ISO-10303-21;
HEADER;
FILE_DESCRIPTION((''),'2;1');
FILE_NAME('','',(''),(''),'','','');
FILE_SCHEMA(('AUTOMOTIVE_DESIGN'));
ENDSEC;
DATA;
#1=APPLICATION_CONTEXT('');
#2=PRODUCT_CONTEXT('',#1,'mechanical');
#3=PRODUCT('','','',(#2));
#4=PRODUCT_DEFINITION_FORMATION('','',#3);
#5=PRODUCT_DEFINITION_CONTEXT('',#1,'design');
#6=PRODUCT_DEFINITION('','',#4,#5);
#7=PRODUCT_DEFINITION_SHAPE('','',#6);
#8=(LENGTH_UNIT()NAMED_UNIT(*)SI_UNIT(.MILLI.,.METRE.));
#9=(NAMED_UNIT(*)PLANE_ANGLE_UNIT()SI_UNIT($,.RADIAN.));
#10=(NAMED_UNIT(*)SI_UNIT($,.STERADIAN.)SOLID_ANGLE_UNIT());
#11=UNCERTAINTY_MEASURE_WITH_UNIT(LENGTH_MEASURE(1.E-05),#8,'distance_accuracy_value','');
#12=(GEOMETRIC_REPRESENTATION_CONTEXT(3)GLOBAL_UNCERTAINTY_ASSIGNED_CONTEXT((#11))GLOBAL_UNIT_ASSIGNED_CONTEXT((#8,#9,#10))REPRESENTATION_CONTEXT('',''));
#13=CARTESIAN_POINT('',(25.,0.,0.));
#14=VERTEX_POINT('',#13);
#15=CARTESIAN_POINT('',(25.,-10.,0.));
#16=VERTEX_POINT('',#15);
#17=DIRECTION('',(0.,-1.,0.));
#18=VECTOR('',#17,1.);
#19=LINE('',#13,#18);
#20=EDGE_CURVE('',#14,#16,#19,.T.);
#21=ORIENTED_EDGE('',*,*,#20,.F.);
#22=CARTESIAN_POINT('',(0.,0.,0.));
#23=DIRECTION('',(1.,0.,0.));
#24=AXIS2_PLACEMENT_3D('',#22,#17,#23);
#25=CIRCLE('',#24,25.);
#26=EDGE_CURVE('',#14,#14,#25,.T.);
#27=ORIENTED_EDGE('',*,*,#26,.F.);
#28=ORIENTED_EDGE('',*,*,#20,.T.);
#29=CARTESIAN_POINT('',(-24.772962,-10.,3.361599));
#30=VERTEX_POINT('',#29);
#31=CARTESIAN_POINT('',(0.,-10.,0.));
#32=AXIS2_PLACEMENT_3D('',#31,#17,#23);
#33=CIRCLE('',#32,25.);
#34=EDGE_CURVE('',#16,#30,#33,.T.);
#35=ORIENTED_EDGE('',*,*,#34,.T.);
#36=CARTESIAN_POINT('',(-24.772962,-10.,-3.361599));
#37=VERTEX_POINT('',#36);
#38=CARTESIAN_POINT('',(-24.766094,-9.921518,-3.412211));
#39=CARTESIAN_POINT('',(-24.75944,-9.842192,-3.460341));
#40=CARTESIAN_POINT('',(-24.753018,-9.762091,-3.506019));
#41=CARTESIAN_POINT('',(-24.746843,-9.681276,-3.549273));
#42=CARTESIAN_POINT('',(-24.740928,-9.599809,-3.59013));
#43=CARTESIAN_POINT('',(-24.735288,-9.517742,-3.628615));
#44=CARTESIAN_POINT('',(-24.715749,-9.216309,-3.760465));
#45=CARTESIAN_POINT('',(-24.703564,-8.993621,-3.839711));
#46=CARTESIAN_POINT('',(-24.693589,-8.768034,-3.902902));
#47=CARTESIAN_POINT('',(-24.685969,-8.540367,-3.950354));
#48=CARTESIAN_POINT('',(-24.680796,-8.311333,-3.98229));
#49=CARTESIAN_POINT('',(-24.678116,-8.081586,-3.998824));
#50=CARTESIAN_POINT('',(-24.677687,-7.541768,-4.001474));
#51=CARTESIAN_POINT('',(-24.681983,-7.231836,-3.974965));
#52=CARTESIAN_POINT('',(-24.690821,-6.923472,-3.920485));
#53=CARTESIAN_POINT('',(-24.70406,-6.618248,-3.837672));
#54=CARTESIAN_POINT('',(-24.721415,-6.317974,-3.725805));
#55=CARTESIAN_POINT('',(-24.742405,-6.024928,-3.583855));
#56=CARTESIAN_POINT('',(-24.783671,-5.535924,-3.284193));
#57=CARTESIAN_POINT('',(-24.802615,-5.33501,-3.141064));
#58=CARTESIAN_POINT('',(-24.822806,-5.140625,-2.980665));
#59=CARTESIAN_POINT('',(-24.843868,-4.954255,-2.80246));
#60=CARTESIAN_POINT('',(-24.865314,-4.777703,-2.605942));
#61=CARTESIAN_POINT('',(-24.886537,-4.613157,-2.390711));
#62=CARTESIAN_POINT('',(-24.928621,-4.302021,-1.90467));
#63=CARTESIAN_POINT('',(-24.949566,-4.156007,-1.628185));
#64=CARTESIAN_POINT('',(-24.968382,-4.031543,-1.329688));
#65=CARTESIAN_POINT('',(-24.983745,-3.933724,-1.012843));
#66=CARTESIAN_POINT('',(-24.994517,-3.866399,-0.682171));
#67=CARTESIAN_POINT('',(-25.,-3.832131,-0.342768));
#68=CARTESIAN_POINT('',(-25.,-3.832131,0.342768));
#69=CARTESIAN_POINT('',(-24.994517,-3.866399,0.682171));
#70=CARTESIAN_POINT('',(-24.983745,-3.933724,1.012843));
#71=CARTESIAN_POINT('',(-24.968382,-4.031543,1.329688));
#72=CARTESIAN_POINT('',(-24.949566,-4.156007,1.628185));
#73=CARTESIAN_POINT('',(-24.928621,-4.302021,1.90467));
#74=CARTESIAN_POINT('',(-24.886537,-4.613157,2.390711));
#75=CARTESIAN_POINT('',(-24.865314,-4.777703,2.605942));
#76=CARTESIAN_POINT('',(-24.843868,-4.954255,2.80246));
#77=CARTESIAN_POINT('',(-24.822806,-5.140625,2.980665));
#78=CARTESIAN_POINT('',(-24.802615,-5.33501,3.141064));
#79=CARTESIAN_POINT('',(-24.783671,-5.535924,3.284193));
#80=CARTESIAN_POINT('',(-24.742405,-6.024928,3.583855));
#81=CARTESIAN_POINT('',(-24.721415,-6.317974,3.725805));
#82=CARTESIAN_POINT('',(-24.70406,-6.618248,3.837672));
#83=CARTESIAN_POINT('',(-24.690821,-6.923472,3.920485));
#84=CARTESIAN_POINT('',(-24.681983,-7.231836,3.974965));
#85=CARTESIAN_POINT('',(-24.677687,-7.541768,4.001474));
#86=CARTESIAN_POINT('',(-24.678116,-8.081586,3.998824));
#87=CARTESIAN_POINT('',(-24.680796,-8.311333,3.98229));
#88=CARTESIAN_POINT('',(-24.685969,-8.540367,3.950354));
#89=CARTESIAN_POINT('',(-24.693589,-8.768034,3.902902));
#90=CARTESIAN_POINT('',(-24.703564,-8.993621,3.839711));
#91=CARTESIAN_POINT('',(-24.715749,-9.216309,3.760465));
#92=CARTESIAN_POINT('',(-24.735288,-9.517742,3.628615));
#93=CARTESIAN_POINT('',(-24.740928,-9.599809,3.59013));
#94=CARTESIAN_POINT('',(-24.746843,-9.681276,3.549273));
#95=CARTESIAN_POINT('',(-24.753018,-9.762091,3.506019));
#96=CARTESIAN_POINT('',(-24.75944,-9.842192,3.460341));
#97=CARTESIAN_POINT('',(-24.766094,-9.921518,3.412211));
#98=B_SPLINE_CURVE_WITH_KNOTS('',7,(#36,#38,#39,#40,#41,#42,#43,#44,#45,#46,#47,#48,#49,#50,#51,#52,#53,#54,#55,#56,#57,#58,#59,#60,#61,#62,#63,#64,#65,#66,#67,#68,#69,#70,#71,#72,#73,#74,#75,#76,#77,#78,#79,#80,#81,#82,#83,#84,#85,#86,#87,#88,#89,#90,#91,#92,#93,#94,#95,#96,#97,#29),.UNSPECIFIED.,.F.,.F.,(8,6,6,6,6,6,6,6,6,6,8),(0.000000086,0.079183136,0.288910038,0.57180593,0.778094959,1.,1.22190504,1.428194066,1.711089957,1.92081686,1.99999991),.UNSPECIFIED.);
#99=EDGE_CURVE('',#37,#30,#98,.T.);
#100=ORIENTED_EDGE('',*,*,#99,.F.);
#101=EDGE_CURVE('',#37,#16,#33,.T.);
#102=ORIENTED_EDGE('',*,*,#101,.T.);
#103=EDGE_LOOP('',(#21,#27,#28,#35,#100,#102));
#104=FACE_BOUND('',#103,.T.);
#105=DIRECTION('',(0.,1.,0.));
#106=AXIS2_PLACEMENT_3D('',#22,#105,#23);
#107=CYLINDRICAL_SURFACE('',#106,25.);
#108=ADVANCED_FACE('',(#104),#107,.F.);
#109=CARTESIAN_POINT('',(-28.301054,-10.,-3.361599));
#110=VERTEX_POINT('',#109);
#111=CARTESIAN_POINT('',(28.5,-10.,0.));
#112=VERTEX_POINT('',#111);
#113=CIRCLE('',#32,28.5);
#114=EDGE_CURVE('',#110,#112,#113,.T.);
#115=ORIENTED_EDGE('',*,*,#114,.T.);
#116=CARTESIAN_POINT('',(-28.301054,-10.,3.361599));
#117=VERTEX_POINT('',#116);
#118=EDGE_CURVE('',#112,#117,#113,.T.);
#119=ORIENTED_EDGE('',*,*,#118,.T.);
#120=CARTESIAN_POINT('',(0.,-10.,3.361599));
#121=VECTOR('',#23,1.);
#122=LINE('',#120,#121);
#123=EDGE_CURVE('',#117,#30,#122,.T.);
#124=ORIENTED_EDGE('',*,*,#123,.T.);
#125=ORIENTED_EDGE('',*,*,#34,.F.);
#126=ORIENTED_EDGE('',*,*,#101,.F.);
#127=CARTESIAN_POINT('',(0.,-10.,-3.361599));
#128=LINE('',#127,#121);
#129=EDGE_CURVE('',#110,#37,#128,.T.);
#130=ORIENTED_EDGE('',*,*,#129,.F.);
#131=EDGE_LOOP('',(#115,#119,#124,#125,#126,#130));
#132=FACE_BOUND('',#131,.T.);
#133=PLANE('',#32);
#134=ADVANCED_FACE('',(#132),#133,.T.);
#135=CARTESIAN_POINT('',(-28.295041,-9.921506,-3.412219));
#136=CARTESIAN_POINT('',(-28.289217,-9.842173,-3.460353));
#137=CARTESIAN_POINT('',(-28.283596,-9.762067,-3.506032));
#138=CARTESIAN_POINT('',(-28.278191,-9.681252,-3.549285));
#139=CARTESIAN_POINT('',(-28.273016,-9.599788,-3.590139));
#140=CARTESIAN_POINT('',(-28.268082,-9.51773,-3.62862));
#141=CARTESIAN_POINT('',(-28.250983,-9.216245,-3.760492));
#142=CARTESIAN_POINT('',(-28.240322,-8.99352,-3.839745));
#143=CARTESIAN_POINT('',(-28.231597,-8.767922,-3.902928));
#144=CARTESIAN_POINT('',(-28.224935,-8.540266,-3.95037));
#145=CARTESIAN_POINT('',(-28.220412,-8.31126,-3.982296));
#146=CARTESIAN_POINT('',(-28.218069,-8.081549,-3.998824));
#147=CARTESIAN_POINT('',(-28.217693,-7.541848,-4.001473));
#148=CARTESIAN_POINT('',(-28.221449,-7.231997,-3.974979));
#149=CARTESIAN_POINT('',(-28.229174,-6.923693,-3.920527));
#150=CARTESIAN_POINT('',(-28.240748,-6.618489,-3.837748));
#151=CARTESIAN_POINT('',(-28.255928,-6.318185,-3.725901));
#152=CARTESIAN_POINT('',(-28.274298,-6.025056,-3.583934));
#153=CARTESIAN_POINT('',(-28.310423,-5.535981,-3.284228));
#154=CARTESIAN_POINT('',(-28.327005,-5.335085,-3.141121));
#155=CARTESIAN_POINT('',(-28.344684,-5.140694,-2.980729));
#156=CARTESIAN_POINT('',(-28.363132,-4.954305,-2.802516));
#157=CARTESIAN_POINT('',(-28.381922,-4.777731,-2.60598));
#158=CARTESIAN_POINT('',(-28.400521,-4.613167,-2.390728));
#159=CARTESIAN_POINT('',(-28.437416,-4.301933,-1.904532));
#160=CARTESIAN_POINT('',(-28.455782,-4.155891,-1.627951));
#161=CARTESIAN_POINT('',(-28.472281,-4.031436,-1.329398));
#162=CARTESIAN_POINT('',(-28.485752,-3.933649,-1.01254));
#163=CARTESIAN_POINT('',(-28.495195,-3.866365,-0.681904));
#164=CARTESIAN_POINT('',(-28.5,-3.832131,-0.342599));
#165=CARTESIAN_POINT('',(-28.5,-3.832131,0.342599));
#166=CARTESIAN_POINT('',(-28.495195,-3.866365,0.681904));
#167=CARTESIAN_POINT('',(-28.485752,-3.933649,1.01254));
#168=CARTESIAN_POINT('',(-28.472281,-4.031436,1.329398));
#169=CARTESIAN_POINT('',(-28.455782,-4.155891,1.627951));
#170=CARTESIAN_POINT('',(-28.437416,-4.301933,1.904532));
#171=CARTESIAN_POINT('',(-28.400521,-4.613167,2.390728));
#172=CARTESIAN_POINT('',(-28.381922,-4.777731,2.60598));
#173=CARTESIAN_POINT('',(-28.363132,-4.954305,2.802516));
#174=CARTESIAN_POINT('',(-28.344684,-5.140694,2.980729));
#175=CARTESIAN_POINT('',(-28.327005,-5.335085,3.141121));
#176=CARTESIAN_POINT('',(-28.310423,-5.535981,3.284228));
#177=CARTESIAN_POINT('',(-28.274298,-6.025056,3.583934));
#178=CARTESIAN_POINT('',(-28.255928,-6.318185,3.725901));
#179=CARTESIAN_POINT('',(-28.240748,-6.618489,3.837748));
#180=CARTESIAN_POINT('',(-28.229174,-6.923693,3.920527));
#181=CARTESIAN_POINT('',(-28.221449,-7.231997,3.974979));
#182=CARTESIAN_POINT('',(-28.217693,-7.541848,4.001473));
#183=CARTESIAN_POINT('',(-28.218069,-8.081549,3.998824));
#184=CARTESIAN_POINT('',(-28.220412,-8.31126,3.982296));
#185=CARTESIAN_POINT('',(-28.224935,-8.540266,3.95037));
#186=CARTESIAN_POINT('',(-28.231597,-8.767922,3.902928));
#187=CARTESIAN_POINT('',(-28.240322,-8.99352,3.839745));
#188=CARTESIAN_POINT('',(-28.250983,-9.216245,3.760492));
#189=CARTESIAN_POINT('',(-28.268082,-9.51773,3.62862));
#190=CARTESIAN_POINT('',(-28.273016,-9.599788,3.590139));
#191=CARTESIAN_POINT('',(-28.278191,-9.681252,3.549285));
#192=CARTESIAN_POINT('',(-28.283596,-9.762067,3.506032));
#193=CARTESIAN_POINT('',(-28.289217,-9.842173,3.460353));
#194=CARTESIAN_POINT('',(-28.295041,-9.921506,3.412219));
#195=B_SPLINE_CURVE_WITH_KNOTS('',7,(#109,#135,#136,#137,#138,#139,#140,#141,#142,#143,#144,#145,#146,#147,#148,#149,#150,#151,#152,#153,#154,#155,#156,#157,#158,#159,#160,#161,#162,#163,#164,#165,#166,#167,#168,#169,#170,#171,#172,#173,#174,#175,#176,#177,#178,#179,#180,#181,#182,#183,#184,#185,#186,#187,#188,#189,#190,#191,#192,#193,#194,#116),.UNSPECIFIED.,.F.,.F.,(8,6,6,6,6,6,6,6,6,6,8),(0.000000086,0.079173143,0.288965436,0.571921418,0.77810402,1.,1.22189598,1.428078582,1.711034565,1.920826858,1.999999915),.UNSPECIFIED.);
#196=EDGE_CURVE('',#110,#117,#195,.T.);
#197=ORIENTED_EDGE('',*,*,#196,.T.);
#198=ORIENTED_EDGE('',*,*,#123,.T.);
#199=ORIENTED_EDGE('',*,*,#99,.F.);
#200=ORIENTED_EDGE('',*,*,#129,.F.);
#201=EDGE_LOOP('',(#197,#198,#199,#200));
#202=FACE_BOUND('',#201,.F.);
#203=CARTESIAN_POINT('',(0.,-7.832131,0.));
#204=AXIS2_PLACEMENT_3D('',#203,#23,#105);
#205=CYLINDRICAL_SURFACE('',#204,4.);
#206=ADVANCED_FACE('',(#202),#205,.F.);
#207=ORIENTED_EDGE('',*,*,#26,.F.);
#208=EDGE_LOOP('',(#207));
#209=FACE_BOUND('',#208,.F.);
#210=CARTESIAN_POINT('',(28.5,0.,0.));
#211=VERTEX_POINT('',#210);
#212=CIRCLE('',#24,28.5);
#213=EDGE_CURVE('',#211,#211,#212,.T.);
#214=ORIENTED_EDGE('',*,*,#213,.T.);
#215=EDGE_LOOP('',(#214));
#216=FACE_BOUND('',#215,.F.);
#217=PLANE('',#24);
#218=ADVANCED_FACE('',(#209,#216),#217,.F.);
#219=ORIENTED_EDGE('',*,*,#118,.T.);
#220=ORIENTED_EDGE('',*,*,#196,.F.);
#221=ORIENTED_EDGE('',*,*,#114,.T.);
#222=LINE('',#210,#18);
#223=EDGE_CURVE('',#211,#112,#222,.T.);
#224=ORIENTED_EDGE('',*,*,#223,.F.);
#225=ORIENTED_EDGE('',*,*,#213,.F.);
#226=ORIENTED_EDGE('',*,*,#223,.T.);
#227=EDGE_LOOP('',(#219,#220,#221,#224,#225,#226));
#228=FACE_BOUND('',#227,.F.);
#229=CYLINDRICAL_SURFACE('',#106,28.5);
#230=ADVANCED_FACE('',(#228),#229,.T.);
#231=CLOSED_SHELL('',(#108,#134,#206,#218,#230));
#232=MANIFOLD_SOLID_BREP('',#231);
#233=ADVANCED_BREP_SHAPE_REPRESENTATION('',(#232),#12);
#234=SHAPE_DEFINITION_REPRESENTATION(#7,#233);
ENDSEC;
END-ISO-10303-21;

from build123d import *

# Parameters (mm, degrees)
F0_R     = 28.5
F0_R_2   = 25
F1_DEPTH = 10
F3_D     = 8
F3_DEPTH = 28.501


with BuildPart() as f1:
    # F0 (on Front) → F1 (new body)
    with BuildSketch(Plane.XZ):
        Circle(F0_R)
        Circle(F0_R_2, mode=Mode.SUBTRACT)
    extrude(amount=F1_DEPTH)

    # F3 (through all, one way)
    with BuildSketch(Plane.YZ):
        with Locations((-7.8321313486, 0)):
            Circle(F3_D / 2)
    extrude(amount=-F3_DEPTH, mode=Mode.SUBTRACT)


solid = f1.part
